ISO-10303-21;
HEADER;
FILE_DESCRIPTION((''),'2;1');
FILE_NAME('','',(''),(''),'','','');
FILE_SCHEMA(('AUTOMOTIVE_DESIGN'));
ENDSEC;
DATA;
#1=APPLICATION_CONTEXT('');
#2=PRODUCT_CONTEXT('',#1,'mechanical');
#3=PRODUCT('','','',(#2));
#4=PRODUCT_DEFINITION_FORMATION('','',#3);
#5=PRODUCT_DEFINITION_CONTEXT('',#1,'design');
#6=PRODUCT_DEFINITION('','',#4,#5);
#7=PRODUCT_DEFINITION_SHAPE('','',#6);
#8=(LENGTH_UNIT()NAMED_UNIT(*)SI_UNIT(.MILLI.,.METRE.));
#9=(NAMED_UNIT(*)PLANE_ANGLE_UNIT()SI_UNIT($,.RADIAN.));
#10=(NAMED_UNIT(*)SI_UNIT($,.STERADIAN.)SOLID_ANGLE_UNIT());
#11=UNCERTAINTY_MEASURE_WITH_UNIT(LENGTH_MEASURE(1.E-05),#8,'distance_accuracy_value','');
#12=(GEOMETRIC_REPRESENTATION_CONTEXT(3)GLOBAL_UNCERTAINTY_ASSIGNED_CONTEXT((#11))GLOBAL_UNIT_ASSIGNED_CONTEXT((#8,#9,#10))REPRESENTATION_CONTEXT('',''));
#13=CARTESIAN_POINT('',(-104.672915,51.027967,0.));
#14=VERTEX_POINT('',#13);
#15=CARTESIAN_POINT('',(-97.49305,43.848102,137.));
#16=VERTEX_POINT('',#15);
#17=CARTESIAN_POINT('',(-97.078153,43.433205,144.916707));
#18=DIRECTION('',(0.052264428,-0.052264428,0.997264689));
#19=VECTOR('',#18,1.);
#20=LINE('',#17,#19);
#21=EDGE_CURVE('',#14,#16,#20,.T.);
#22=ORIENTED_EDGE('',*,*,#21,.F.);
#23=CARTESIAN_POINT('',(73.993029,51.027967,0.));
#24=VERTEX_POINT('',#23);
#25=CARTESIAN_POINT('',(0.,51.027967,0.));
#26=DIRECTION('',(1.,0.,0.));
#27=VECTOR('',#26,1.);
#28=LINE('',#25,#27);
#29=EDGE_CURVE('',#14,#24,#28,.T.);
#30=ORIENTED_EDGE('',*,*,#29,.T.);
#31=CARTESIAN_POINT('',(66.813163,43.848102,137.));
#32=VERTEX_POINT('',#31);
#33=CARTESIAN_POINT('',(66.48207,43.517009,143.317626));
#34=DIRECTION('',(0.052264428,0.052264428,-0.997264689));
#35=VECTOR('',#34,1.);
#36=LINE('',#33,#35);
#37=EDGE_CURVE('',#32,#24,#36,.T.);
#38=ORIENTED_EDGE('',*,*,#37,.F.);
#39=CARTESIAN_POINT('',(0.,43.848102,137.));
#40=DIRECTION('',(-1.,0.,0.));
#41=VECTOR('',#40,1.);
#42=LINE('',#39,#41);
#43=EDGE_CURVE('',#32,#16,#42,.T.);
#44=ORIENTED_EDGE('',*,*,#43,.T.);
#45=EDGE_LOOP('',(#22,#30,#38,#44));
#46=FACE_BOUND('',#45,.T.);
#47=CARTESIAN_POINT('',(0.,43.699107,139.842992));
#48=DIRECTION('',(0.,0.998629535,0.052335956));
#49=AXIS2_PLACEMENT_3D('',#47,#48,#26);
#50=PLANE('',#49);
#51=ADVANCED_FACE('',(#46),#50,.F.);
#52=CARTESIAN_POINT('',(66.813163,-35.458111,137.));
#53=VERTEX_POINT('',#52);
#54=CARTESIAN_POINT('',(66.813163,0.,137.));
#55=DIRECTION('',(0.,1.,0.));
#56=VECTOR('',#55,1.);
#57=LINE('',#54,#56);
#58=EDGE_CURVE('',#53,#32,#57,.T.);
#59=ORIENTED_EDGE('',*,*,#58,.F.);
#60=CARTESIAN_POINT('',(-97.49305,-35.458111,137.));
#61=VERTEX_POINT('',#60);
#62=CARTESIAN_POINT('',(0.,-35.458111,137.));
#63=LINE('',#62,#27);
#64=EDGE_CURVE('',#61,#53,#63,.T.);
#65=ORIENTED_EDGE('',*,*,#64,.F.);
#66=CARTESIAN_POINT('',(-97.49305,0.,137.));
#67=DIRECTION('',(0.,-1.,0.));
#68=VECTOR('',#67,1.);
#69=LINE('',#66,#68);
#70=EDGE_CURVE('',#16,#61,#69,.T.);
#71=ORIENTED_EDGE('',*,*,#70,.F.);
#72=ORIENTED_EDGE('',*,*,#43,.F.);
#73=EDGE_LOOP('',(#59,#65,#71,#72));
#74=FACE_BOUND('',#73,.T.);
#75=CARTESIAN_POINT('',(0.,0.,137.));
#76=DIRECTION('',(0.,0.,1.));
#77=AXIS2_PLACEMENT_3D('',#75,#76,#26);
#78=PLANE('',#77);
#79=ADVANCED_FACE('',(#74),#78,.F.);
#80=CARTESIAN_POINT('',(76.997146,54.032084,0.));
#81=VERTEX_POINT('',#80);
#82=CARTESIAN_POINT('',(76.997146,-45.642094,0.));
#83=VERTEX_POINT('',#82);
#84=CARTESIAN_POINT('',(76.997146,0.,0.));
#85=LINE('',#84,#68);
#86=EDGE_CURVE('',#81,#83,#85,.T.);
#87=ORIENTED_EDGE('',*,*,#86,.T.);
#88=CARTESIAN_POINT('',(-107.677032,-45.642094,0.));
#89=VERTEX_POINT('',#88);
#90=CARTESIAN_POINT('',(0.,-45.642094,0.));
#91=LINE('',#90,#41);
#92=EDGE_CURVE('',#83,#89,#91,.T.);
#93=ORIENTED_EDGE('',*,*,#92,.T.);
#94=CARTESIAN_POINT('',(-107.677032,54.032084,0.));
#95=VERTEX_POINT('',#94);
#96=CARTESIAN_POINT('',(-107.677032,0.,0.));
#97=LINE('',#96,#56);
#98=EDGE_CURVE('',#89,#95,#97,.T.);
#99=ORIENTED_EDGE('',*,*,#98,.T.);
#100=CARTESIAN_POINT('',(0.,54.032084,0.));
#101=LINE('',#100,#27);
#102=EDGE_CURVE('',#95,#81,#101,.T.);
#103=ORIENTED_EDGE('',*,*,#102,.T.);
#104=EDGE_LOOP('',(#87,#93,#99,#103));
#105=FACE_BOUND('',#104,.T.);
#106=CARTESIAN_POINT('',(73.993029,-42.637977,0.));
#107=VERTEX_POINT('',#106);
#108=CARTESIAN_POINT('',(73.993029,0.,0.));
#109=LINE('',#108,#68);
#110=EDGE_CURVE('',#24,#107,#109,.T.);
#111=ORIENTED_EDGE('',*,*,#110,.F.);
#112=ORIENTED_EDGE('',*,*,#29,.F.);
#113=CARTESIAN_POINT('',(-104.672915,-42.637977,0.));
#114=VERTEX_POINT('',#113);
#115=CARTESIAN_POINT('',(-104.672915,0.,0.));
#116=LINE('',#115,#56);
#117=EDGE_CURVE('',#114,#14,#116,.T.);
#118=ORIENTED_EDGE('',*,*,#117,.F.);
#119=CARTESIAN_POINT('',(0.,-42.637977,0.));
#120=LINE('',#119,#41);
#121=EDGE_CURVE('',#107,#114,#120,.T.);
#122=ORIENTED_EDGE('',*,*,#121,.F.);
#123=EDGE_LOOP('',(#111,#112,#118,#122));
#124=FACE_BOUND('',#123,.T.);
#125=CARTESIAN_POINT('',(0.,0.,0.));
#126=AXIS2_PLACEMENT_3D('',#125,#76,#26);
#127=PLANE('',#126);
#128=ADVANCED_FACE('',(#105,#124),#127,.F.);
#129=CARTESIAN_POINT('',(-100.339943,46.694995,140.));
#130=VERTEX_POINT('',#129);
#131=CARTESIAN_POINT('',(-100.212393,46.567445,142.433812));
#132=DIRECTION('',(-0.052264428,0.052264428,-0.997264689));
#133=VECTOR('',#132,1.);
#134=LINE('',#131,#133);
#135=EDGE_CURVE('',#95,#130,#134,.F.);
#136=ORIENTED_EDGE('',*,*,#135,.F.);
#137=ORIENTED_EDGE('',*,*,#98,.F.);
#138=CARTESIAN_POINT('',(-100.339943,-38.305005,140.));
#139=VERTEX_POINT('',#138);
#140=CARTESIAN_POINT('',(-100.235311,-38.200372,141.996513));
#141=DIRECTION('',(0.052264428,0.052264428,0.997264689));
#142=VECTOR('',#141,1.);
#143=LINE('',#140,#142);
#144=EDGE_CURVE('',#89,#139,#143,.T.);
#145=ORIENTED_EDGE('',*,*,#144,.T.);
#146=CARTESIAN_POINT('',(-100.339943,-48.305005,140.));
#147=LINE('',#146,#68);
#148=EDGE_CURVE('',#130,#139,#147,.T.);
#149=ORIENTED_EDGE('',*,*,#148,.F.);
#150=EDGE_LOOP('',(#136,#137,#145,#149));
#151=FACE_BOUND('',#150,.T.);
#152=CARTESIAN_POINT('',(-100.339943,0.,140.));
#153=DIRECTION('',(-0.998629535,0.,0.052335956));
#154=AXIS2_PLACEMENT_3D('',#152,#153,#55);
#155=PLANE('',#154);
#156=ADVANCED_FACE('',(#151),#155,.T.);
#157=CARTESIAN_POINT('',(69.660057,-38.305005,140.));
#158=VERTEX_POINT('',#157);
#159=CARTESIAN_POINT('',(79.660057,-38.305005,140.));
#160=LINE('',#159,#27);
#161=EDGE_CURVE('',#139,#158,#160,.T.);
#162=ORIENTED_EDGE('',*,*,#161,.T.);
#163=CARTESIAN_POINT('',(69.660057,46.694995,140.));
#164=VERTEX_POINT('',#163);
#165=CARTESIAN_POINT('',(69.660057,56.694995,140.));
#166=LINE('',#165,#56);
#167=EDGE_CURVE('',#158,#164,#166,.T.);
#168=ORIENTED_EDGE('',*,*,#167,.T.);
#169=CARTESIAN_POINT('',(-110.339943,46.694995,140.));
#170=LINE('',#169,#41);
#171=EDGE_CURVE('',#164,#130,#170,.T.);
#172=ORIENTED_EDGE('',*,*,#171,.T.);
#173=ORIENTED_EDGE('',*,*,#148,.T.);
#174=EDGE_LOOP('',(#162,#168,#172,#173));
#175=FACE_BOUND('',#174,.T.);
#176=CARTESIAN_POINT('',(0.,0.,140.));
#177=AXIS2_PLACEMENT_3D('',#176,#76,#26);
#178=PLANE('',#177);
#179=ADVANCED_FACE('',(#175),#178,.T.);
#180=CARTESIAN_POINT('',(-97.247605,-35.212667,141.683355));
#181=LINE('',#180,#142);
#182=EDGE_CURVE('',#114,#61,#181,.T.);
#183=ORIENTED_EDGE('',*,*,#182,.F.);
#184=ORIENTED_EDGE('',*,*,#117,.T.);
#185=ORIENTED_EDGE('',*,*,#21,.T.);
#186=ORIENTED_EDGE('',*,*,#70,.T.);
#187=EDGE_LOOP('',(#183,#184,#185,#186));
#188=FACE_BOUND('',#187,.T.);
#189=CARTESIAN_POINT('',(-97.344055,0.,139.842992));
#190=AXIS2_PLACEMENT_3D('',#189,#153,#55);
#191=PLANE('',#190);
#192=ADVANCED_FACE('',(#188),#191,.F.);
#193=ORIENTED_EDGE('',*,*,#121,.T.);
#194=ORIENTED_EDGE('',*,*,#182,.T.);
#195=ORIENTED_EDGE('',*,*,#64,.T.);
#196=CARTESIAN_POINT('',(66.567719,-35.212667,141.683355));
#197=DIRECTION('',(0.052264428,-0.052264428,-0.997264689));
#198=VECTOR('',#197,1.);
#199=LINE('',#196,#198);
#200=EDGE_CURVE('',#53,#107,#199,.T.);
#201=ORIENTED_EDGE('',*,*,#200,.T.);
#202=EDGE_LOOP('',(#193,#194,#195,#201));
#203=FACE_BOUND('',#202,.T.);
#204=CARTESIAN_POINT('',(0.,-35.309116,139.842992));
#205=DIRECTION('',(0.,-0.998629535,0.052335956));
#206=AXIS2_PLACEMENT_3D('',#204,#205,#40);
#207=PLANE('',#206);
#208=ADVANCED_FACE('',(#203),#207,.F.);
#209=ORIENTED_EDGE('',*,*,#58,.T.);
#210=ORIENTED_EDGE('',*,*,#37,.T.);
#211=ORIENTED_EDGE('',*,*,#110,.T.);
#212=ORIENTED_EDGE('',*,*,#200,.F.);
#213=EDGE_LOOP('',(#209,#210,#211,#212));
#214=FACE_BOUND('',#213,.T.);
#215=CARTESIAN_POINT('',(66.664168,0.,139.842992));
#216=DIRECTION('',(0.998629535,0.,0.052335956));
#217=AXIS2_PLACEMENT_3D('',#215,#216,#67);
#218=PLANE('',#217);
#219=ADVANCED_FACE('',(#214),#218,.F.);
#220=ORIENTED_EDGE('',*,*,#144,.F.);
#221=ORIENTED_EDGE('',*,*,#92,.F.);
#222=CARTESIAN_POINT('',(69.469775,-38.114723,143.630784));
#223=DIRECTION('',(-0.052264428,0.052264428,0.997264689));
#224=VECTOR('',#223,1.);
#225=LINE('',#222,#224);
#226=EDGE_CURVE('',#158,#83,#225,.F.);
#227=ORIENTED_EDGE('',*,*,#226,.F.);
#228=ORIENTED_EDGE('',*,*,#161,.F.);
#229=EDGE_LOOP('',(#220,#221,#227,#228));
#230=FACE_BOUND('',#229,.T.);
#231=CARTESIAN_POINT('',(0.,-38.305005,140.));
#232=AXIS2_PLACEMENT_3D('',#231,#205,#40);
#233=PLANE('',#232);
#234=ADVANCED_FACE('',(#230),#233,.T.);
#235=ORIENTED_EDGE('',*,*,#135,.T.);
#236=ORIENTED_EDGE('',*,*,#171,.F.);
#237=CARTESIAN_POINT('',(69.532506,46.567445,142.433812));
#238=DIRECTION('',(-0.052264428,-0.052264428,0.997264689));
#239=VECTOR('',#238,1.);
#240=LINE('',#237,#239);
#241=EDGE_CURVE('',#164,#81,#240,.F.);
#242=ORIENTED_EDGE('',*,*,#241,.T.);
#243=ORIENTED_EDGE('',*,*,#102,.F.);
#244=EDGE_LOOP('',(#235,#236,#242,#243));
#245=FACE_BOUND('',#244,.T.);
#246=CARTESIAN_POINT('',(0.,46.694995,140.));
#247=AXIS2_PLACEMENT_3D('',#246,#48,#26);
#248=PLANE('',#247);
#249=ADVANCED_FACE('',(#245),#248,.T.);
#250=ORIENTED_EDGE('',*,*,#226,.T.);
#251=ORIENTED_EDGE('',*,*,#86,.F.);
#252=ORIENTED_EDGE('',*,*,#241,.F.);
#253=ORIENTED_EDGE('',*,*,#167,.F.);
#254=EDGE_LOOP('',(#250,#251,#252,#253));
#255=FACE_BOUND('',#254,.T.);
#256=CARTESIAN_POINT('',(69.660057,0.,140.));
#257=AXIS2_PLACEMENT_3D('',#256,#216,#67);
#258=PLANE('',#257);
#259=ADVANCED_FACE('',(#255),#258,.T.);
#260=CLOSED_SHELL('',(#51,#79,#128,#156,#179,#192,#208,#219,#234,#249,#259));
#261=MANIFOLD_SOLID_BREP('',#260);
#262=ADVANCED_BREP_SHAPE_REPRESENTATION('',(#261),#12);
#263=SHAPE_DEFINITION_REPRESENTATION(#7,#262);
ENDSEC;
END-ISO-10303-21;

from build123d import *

# Parameters (mm, degrees)
SKETCH1_W           = 190
SKETCH1_H           = 105
BOSS_EXTRUDE1_DEPTH = 140
CHAMFER1_SIZE       = 190.811366877
CHAMFER1_SIZE_2     = 10
SHELL1_T            = -3


with BuildPart() as part:
    # Sketch1 → Boss-Extrude1 (new body)
    with BuildSketch(Plane.XY):
        with Locations((-15.339943343, 4.194995279)):
            Rectangle(SKETCH1_W, SKETCH1_H)
    extrude(amount=BOSS_EXTRUDE1_DEPTH)

    # Chamfer1
    # the kernel refuses this chamfer: 190.811366877, 10 mm, written as the material it takes off along each edge
    with BuildSketch(Plane(origin=(-606.424352322, 56.694995279, 140), x_dir=(0, 0.00201302342238207, -0.9999979738662977), z_dir=(1, 0, 0)), Plane(origin=(575.744465637, -48.305004721, 140), x_dir=(0, -0.00201302342238207, -0.9999979738662977), z_dir=(-1, 0, 0))) as chamfer1_piece_1:
        Polygon((CHAMFER1_SIZE * 0.999997973868, -CHAMFER1_SIZE * 0.00201302342239), (-CHAMFER1_SIZE_2 * 0.00201302342238, -CHAMFER1_SIZE_2 * 0.999997973866), (0, 0), align=None)
    extrude(amount=1182.168817959, mode=Mode.SUBTRACT)
    with BuildSketch(Plane(origin=(79.660056657, 552.779404258, 140), x_dir=(0.0020130234223821055, 0, -0.9999979738662977), z_dir=(0, -1, 0)), Plane(origin=(-110.339943343, -544.389413701, 140), x_dir=(-0.0020130234223821055, 0, -0.9999979738662977), z_dir=(0, 1, 0))) as chamfer1_piece_2:
        Polygon((CHAMFER1_SIZE * 0.999997973868, -CHAMFER1_SIZE * 0.00201302342239), (-CHAMFER1_SIZE_2 * 0.00201302342238, -CHAMFER1_SIZE_2 * 0.999997973866), (0, 0), align=None)
    extrude(amount=1097.168817959, mode=Mode.SUBTRACT)

    # Shell1
    shell1_openings = [part.faces().sort_by_distance(p)[0] for p in [
        (-15.339943343, 4.194995279, 0),
    ]]
    offset(amount=SHELL1_T, openings=shell1_openings, kind=Kind.INTERSECTION)


solid = part.part
